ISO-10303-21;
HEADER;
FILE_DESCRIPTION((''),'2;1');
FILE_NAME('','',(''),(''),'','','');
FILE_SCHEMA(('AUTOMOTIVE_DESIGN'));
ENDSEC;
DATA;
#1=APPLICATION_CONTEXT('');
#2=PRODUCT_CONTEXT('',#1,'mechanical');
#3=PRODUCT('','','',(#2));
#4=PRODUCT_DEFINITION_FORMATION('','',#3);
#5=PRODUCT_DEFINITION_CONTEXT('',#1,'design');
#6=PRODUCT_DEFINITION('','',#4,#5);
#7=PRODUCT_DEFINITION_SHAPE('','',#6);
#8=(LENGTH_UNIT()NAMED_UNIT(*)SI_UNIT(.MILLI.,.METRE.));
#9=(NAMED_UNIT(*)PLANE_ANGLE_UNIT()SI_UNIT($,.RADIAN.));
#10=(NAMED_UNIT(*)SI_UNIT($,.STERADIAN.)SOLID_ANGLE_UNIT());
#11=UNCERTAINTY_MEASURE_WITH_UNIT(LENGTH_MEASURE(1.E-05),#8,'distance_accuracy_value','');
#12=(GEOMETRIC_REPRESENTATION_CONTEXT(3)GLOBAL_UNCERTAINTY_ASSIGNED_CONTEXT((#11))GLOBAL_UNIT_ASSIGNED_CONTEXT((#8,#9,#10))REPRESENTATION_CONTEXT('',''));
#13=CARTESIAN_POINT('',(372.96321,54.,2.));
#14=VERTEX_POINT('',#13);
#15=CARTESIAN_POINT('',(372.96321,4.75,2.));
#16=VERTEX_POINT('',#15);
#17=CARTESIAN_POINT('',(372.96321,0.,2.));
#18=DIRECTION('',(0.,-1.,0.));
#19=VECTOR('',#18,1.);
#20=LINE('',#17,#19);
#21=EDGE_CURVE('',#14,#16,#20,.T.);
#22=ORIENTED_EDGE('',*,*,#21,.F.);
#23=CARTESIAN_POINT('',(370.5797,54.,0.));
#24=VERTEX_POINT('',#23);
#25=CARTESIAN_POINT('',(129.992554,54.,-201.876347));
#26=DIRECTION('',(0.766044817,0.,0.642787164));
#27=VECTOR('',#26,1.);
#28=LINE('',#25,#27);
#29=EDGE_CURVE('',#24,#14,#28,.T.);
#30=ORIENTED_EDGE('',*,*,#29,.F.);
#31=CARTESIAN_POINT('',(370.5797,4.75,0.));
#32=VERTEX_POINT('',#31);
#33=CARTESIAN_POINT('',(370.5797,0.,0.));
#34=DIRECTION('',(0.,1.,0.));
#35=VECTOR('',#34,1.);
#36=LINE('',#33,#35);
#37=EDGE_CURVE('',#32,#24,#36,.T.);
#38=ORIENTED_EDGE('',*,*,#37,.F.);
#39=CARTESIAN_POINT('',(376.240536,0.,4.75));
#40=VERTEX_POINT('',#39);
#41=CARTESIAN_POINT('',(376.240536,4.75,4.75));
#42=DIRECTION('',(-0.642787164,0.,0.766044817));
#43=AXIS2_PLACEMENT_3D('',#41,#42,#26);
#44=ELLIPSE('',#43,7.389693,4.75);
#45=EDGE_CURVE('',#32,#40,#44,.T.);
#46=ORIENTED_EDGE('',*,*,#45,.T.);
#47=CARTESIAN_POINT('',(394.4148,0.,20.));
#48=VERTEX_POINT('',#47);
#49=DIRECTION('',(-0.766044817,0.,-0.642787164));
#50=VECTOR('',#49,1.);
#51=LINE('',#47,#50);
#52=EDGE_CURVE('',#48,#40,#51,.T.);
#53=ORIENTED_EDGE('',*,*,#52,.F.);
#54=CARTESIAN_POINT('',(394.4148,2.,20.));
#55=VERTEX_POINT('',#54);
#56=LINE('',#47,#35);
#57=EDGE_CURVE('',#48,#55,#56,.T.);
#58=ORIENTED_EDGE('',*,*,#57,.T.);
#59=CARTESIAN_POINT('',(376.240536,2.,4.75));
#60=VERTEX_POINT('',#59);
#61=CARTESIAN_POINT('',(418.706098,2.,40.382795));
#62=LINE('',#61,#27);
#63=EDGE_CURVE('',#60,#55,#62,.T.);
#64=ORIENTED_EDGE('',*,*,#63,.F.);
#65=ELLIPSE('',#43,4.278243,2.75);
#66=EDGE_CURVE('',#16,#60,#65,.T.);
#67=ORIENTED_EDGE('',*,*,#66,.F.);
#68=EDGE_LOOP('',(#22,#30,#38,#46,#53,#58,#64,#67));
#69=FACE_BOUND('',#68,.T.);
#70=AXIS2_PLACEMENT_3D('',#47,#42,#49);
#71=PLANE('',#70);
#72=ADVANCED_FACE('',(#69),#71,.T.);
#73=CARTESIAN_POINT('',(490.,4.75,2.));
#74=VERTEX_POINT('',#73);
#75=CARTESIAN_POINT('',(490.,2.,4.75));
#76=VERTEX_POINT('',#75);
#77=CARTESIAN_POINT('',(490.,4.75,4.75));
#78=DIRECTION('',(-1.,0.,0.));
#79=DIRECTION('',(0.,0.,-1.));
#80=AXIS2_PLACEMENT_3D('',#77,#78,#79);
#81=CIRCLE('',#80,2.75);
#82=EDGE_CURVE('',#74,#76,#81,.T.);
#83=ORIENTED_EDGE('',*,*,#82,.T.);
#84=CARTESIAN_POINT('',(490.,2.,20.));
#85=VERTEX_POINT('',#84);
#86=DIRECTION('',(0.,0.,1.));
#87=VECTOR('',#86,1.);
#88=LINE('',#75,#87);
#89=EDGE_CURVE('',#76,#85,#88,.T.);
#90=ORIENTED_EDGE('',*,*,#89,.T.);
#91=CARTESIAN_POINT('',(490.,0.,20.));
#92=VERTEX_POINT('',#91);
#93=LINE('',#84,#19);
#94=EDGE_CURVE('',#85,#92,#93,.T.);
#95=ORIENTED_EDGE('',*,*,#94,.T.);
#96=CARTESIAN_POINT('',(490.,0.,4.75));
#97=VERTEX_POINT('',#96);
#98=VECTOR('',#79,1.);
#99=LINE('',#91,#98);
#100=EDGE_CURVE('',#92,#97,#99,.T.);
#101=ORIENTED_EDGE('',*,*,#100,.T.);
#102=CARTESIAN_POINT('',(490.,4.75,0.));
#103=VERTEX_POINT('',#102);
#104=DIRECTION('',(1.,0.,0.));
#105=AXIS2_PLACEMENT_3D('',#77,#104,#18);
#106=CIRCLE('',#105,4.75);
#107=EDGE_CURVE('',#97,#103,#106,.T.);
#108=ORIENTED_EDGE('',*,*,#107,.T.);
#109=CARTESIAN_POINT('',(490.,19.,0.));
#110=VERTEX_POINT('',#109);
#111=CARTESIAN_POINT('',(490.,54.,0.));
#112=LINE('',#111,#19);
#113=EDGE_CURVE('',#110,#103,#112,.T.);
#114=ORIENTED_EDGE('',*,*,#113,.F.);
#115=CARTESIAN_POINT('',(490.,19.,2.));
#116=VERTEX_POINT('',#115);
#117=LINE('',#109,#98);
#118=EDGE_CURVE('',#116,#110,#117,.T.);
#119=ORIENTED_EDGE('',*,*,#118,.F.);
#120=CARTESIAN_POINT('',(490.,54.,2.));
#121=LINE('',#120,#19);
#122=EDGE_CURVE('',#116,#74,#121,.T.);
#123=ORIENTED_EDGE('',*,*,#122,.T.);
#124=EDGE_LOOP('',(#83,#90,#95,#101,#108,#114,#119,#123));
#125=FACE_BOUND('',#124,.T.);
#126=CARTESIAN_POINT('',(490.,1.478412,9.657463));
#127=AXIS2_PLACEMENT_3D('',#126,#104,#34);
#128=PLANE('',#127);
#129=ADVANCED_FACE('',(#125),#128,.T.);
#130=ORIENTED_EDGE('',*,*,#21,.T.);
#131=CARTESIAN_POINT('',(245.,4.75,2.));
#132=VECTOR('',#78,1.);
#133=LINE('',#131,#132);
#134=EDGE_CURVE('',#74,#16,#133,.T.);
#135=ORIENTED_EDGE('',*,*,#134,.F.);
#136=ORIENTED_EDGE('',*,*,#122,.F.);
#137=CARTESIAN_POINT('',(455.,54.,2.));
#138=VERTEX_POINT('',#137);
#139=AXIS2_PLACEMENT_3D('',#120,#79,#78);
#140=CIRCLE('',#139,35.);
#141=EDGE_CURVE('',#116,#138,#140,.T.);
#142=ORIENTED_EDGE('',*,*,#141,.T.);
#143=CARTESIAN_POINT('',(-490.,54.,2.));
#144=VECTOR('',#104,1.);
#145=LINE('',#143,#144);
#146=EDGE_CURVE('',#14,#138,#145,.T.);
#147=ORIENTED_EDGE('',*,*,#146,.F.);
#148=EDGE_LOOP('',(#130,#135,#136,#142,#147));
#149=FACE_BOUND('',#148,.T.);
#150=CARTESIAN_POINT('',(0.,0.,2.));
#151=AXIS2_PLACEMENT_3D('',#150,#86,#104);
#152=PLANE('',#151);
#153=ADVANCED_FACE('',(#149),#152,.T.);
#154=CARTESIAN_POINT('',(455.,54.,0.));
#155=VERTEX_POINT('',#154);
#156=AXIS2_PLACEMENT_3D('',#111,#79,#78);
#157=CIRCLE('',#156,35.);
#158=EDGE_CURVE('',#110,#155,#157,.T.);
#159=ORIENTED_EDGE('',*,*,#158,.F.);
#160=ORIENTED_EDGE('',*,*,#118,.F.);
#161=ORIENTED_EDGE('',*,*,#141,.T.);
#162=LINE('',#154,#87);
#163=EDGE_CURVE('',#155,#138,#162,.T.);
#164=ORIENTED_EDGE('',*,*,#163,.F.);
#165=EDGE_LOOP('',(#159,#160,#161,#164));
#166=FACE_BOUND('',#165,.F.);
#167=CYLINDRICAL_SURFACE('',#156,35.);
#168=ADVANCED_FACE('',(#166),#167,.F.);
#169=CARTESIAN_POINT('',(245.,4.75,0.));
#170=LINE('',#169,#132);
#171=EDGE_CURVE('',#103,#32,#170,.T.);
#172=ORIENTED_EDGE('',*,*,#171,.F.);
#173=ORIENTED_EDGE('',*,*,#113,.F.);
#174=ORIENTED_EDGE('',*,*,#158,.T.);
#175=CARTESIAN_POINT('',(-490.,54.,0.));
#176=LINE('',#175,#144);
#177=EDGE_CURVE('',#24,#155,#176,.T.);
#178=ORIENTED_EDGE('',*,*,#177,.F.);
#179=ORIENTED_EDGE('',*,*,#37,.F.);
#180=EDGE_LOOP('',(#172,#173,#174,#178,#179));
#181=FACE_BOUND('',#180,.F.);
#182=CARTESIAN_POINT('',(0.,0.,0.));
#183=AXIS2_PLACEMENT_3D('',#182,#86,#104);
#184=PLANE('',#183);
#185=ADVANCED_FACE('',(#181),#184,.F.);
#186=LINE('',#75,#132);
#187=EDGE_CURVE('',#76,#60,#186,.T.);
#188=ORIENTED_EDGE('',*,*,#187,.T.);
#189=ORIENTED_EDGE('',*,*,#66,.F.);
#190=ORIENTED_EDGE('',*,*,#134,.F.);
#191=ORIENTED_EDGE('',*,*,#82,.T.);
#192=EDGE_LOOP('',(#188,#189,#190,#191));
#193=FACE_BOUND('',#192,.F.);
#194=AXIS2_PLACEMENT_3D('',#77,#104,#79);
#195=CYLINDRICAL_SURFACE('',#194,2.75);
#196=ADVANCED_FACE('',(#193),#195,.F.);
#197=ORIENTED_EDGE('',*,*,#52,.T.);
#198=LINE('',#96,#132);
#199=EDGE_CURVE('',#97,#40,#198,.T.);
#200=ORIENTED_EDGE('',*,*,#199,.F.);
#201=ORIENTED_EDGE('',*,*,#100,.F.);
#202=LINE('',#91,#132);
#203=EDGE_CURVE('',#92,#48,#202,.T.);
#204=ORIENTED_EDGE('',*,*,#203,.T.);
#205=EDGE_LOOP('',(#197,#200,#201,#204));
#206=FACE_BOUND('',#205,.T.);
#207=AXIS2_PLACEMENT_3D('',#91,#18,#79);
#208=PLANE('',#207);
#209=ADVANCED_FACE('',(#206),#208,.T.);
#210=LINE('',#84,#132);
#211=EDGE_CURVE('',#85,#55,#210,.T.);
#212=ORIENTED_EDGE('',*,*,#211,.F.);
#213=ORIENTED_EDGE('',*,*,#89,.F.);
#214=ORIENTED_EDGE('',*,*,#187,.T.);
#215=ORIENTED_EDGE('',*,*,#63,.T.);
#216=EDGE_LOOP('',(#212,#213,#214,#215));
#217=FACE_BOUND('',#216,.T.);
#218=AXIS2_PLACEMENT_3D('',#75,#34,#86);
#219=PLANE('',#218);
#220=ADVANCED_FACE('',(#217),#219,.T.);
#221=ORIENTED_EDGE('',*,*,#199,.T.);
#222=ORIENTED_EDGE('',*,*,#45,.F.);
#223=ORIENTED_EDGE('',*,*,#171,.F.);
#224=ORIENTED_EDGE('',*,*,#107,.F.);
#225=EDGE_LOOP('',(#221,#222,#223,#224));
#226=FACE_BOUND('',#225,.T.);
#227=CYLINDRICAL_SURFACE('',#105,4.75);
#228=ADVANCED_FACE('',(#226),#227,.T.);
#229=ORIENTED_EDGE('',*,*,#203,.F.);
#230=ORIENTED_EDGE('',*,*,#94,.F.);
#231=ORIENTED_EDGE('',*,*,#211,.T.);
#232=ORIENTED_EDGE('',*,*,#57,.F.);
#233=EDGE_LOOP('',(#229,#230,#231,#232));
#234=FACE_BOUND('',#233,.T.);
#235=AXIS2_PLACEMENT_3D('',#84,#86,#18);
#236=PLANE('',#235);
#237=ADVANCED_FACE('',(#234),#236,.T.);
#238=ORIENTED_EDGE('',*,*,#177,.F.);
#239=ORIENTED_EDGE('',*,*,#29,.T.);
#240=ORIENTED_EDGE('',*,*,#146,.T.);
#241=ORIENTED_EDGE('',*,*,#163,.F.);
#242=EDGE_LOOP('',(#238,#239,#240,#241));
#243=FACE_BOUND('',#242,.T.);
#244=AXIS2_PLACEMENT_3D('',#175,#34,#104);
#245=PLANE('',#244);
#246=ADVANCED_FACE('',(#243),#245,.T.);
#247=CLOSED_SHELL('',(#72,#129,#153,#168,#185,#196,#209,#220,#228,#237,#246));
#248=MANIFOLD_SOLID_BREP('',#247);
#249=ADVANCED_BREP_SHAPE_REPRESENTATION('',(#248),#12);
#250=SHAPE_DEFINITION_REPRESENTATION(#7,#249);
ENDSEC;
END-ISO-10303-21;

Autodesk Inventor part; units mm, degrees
ref_plane "YZ Plane" through (0, 0, 0) normal (1, 0, 0) x (0, 1, 0)
ref_plane "XZ Plane" through (0, 0, 0) normal (0, 1, 0) x (-1, 0, 0)
ref_plane "XY Plane" through (0, 0, 0) normal (0, 0, 1) x (1, 0, 0)
sketch "Sketch1" plane through (0, 0, 0) normal (0, 0, 1) x (1, 0, 0)
  line L0 (-490, 54) -> (490, 54)
  line L1 (490, 54) -> (490, 0)
  line L2 (490, 0) -> (-490, 0)
  line L3 (-490, 0) -> (-490, 54)
  point P0 (0, 0)
  point P1 (0, 0)
  dimension "d0" = 980
  dimension "d1" = 54
extrude "Plate1" add sketch "Sketch1" along normal blind 2
sketch "Sketch2" plane through (490, 2, 0) normal (0, -1, 0) x (1, 0, 0)
  line L0 (-980, 0) -> (0, 0)
  line L1 (0, 0) -> (0, 20)
  line L2 (0, 20) -> (-980, 20)
  line L3 (-980, 20) -> (-980, 0)
edge flange "Flange1" height 20 angle 90 thickness 2 bend radius 2.75 thickness toward (0, -1, 0) relief round relief width 2 relief depth 1 edges at (0, 0, 2) wall of the first edge with corners at (-490, 2, 0) (490, 2, 0) (490, 2, 20) (-490, 2, 20)
bend "Bend1"
corner "Corner1"
sketch "Sketch5" plane through (0, 0, 0) normal (0, 0, -1) x (-1, 0, 0)
  line L0 (490, 54) -> (-490, 54) projected
  line L1 (490, 0) -> (-490, 0) projected
  circle A0 centre (0, 54) radius 35
  line L2 (243.95, 54) -> (246.05, 54)
  line L3 (246.05, 54) -> (246.05, 29)
  line L4 (246.05, 29) -> (243.95, 29)
  line L5 (243.95, 29) -> (243.95, 54)
  line L6 (-243.95, 54) -> (-246.05, 54)
  line L7 (-246.05, 54) -> (-246.05, 29)
  line L8 (-246.05, 29) -> (-243.95, 29)
  line L9 (-243.95, 29) -> (-243.95, 54)
  line L10 (0, 54) -> (0, 0) construction
  circle A1 centre (-490, 54) radius 35
  point P0 (0, 0)
  point P1 (245, 29)
  point P2 (-245, 29)
  point P3 (246.05, 54)
  point P4 (-35, 54)
  point P5 (35, 54)
  point P6 (-246.05, 54)
  dimension "d45" = 70
  dimension "d48" = 2.1
  dimension "d49" = 490
  dimension "d51" = 29
  dimension "d52" = 25
extrude "Extrusion1" cut sketch "Sketch5" against normal through all contours L3 L4 L5 L0 | L9 L8 L7 L0 | A0 L0 | A1 picked at (-5.9248, 35.8306)
sketch "Sketch9" plane through (0, 0, 2) normal (0, 0, 1) x (1, 0, 0)
  line L0 (485.6141, 29.596) -> (485.6141, 17.596) construction
  line L1 (485.6141, 17.596) -> (285.6141, 17.596) construction
  line L2 (285.6141, 17.596) -> (285.6141, 29.596) construction
  line L3 (285.6141, 29.596) -> (485.6141, 29.596) construction
  line L4 (-490, 54) -> (490, 54) projected
  point P0 (0, 0)
  point P1 (1.05, 68)
  point P2 (490, 54)
  dimension "d40" = 200
  dimension "d41" = 12
mark "Mark2"
sketch "Sketch10" plane through (-490, 0, 20) normal (0, -1, 0) x (1, 0, 0)
  line L0 (0, -20) -> (0, -18) projected
  line L1 (0, 0) -> (980, 0) projected
  line L2 (0, -20) -> (884.4148, -20)
  line L3 (884.4148, -20) -> (884.4148, 0)
  line L4 (884.4148, 0) -> (0, 0)
  line L5 (0, 0) -> (0, -20)
  line L6 (884.4148, 0) -> (860.5797, -20)
  point P0 (490, -20)
  dimension "d53" = 50
  dimension "d54" = 884.4148
extrude "Extrusion4" cut sketch "Sketch10" against normal through all contours L0 L5 L1 L6 L2
equation "\"d2\" = Thickness"
equation "\"d3\" = BendReliefWidth"
equation "\"d4\" = BendReliefDepth"
equation "\"d5\" = MinimumRemnant"
equation "\"d6\" = TransitionRadius"
equation "\"d9\" = BendRadius"
equation "\"d10\" = CornerReliefSize"
equation "\"d11\" = GapSize"
equation "\"d12\" = JacobiRadiusSize"
equation "\"BendReliefWidth\" = Thickness"
equation "\"BendReliefDepth\" = 0.5 * Thickness"
equation "\"CornerReliefSize\" = 4 * Thickness"
equation "\"MinimumRemnant\" = 2 * Thickness"
equation "\"TransitionRadius\" = BendRadius"
equation "\"JacobiRadiusSize\" = BendRadius"
equation "\"GapSize\" = Thickness"
equation "\"Thickness\" = 2"
equation "\"BendRadius\" = 2.75"
properties part number "MSC 327 STRINGER BOARD  ###" material "Stainless Steel"
